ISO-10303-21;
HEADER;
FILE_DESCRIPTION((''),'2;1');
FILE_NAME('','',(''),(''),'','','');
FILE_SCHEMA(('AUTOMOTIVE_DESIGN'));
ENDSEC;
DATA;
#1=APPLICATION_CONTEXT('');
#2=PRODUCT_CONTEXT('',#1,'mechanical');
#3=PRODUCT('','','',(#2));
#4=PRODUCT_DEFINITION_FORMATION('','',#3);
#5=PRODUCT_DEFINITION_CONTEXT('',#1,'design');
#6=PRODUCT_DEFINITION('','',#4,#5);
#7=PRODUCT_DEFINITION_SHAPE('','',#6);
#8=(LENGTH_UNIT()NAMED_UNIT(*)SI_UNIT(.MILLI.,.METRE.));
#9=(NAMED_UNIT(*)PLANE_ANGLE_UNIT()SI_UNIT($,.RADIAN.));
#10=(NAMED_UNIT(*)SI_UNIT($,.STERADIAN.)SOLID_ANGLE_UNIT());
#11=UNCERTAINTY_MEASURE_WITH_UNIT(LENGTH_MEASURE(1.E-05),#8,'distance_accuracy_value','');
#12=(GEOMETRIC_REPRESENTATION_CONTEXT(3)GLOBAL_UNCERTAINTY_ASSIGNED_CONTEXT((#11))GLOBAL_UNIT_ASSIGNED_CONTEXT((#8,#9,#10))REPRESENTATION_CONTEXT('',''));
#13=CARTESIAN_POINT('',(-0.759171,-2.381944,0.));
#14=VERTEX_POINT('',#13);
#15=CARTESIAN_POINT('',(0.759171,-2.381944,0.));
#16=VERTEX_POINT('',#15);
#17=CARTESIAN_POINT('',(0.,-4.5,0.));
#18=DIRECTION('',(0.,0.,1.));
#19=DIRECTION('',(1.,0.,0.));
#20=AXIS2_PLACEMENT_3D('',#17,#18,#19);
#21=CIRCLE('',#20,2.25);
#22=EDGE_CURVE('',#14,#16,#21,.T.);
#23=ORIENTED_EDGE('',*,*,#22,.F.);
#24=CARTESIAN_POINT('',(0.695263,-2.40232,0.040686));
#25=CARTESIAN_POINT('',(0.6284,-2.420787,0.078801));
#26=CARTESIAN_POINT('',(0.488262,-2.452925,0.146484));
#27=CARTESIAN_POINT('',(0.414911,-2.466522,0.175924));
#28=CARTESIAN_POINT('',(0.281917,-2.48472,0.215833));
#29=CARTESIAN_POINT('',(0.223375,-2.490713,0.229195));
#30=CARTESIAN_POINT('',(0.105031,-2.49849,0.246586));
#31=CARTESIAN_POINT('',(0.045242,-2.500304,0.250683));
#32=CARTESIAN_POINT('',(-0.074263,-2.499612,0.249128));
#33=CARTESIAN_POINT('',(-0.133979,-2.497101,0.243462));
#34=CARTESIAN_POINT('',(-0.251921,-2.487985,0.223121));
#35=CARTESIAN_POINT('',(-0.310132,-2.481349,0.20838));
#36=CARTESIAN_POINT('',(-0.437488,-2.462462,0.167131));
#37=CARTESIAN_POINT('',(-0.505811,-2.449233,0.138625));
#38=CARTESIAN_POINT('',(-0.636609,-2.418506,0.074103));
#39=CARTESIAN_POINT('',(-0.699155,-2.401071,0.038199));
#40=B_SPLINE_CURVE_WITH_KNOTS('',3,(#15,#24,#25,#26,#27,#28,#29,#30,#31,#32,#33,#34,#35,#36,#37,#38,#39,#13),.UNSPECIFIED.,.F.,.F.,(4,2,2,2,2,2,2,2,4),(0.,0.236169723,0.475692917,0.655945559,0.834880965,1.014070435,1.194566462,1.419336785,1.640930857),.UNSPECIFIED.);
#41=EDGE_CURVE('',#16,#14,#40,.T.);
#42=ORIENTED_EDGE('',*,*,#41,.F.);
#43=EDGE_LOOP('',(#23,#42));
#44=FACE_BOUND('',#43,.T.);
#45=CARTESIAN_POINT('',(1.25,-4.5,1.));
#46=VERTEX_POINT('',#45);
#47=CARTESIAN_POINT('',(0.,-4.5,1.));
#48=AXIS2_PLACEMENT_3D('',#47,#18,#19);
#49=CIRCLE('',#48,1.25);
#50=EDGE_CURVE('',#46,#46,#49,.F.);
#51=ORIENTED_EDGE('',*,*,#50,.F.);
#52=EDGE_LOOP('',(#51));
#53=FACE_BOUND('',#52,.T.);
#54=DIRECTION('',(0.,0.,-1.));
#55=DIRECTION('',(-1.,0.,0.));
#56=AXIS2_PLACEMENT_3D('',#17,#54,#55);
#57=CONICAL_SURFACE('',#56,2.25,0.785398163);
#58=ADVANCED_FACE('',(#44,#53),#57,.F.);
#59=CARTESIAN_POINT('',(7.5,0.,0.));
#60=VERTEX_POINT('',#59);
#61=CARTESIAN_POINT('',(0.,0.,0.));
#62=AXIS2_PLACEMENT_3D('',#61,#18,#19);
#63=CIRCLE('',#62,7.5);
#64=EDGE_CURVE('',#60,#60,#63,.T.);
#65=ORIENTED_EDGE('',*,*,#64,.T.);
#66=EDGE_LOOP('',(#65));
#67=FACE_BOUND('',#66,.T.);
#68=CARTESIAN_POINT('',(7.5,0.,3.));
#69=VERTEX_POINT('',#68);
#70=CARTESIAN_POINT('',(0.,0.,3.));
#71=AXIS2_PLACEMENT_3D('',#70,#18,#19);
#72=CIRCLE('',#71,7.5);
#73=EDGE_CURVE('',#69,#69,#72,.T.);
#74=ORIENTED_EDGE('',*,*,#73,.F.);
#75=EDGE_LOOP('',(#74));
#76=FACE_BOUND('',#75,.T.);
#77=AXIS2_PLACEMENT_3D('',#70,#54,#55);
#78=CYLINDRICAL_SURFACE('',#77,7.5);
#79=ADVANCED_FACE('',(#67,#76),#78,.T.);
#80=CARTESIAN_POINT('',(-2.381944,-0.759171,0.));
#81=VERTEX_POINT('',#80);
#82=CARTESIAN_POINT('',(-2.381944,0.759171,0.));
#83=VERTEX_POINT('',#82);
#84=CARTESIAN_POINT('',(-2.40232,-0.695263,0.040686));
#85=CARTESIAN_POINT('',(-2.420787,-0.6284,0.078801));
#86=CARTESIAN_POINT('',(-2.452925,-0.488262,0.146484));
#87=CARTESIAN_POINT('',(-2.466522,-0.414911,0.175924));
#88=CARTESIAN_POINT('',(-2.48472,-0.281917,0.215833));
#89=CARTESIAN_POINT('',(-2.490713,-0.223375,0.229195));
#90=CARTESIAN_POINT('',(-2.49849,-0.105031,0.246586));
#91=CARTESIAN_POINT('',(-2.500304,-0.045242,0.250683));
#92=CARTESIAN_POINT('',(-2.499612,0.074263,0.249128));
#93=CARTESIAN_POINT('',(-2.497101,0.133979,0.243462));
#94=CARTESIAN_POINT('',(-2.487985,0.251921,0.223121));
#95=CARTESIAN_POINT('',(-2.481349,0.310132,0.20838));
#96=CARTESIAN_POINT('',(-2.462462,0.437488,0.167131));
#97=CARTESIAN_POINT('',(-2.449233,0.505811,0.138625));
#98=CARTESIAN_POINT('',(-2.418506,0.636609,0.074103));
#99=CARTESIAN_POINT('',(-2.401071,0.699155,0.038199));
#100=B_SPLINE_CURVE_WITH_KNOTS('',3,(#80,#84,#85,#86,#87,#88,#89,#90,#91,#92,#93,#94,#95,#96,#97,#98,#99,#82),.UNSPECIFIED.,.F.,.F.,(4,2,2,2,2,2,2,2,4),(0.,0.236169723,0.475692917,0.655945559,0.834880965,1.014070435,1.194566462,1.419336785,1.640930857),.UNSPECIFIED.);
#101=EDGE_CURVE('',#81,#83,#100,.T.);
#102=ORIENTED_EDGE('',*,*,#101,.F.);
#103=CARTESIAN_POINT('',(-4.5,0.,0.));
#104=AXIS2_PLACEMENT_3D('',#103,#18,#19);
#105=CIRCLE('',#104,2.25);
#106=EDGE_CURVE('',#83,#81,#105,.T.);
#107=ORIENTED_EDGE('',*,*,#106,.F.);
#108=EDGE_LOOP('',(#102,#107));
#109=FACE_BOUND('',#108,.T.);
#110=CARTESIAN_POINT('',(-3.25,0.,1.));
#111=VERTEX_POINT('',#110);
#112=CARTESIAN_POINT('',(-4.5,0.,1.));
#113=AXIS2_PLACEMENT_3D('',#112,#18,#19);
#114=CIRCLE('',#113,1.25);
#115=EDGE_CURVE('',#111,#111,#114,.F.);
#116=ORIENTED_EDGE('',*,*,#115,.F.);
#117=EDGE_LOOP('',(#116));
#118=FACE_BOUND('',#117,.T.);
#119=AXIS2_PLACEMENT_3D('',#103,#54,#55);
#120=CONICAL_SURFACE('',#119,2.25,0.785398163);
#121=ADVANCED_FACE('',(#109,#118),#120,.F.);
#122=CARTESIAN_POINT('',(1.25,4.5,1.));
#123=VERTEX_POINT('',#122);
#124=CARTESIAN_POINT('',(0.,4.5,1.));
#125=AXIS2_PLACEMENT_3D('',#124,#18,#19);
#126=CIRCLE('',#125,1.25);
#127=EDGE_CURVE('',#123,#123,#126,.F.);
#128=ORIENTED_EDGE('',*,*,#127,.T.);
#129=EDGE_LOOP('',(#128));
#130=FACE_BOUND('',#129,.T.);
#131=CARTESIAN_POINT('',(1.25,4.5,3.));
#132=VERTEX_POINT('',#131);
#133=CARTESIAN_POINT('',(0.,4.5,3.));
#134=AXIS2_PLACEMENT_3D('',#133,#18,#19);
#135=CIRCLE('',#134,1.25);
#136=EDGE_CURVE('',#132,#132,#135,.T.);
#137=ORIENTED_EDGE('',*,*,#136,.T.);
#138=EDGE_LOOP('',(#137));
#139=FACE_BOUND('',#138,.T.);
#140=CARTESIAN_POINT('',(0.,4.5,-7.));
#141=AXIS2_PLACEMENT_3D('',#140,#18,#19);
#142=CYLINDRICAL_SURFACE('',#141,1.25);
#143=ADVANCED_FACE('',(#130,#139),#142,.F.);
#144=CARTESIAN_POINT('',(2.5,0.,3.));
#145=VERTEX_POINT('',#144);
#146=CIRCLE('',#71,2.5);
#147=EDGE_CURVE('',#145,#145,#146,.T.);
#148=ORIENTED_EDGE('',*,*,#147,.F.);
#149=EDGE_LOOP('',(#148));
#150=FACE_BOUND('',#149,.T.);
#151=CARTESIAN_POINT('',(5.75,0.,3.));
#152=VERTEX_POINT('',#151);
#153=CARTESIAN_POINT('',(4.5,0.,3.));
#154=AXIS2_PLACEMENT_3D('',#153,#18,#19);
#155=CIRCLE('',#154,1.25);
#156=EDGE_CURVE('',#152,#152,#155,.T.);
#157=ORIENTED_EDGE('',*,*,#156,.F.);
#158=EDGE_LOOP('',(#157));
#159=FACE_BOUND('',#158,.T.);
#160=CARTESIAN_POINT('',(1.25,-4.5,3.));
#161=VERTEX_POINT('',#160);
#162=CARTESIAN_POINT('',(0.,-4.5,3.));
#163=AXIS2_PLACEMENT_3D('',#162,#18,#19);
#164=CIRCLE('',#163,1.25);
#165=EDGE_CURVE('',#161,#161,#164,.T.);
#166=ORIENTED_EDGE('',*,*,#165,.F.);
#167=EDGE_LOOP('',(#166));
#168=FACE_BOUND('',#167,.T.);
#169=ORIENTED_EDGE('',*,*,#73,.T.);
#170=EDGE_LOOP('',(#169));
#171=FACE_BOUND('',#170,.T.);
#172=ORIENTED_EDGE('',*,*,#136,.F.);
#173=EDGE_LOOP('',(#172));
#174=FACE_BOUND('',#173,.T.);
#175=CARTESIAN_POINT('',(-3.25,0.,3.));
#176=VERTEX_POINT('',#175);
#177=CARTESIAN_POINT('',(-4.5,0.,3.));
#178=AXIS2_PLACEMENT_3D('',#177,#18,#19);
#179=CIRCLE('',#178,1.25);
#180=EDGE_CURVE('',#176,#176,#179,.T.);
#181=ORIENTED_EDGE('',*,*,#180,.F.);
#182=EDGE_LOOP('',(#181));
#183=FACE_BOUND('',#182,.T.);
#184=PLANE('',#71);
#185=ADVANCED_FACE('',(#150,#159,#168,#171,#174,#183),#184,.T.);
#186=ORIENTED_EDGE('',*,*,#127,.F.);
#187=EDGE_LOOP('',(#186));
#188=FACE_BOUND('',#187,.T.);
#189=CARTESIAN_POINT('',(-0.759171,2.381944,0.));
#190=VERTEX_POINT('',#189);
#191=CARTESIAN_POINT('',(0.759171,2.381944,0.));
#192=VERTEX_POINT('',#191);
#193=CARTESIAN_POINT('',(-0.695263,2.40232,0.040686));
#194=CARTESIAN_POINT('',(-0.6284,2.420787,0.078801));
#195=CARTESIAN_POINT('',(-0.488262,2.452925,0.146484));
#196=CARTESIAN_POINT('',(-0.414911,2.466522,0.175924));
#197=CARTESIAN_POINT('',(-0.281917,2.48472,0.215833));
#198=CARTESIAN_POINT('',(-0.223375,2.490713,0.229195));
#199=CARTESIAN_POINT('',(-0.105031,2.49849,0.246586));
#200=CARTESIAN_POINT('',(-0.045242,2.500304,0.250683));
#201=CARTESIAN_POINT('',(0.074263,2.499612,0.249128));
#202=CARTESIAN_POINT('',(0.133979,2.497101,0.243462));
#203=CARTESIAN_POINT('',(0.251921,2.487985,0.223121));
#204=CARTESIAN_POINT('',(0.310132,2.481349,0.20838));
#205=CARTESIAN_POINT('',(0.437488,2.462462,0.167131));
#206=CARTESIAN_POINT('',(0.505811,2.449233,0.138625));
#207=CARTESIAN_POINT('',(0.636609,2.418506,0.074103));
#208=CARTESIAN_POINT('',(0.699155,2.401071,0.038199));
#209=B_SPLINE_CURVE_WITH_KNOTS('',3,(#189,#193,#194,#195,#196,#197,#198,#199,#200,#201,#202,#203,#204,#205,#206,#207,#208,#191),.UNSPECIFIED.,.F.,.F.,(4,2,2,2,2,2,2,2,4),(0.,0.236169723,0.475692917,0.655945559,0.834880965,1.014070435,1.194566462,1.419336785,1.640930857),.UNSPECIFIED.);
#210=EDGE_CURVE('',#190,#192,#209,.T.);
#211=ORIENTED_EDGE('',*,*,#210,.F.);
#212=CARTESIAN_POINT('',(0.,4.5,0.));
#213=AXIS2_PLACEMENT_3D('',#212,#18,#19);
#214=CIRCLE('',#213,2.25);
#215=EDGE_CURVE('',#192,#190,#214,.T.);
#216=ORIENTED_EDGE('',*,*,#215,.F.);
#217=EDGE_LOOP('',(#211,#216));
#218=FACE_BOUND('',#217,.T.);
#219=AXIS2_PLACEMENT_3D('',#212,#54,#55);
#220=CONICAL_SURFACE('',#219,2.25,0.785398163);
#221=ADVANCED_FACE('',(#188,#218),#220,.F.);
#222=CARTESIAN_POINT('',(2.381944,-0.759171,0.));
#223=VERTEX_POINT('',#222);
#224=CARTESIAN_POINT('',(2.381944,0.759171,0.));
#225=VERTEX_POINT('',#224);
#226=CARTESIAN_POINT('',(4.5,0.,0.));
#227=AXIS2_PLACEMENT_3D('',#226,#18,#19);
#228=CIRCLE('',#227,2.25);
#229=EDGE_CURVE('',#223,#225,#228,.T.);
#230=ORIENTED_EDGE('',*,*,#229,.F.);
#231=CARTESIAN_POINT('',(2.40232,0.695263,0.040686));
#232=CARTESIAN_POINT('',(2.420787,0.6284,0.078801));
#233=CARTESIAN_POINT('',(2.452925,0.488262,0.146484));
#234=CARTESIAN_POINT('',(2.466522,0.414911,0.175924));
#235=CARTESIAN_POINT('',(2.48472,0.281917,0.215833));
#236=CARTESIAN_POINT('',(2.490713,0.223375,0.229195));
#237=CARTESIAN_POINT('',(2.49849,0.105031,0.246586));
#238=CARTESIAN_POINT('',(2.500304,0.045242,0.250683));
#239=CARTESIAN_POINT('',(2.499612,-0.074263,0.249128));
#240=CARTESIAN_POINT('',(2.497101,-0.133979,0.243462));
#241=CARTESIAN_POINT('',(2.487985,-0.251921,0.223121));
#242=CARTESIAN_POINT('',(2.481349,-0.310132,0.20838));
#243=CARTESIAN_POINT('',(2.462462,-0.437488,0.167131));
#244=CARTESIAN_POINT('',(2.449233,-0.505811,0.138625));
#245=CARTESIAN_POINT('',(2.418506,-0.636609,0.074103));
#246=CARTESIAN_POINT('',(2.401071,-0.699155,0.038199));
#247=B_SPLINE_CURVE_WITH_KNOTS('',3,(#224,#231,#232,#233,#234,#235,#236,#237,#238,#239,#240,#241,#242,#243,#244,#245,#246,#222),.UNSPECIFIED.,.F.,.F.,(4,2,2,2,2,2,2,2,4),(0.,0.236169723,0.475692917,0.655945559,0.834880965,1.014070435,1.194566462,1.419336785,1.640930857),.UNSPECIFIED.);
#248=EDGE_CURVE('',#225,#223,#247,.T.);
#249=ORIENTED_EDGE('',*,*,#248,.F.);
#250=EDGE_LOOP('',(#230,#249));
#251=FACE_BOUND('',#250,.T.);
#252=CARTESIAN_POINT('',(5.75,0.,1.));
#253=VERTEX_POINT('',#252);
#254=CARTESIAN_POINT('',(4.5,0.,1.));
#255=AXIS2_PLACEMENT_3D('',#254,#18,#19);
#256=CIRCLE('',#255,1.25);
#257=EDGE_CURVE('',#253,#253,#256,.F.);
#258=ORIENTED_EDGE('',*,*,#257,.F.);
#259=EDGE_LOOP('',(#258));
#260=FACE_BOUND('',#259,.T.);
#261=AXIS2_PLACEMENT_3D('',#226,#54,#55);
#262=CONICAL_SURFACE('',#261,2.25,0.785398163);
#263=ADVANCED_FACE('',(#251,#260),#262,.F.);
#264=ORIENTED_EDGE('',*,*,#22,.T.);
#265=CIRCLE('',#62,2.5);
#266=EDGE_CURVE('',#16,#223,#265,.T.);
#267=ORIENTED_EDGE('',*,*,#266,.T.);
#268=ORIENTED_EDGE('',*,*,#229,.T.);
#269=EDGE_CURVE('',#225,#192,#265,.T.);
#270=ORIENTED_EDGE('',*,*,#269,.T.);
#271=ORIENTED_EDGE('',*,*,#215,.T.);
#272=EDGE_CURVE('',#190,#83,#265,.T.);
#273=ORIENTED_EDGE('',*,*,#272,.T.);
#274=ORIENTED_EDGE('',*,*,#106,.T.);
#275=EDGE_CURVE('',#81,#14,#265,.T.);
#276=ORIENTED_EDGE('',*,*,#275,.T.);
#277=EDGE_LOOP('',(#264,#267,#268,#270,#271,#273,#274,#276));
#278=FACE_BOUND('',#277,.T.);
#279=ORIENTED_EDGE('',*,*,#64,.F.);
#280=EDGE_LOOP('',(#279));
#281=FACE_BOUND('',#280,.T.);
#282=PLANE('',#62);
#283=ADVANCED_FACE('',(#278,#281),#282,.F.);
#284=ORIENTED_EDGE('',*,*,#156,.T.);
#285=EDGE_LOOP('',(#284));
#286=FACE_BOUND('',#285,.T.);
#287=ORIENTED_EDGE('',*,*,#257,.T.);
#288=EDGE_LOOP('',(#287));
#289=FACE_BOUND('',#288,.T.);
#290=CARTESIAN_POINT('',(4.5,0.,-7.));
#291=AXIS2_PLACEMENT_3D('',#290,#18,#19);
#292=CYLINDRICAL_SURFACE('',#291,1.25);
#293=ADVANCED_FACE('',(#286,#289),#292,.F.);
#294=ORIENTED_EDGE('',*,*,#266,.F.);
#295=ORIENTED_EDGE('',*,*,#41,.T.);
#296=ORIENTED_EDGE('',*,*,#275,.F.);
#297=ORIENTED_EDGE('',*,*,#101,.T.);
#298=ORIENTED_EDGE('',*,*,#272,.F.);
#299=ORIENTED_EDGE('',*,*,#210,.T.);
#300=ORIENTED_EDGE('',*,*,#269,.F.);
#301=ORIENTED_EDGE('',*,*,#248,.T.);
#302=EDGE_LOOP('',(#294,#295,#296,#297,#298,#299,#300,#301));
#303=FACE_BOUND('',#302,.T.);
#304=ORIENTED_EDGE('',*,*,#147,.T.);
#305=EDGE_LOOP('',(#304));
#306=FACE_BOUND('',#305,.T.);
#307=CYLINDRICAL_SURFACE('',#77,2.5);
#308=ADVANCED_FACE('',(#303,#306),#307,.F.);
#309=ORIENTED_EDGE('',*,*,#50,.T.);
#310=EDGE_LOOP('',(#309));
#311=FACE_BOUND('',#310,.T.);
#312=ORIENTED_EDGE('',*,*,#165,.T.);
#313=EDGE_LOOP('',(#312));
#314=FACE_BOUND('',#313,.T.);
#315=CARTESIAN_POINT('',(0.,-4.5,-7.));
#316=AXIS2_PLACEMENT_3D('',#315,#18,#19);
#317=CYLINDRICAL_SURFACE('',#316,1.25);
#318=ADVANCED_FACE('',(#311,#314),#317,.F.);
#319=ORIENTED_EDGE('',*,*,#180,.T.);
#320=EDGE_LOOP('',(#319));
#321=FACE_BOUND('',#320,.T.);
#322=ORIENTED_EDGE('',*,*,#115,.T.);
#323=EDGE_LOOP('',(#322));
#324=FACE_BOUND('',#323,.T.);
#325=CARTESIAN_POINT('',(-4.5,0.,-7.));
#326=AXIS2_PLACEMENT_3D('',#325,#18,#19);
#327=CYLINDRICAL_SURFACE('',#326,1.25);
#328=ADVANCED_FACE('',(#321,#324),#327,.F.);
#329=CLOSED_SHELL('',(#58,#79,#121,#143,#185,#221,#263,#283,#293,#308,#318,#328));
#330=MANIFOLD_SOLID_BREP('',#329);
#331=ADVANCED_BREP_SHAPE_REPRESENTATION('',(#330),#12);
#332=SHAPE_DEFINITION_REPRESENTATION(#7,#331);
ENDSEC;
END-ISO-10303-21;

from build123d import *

# Parameters (mm, degrees)
SKETCH_1_R          = 7.5
SKETCH_1_R_2        = 2.5
EXTRUDE_1_DEPTH     = 3
SKETCH_2_R          = 1.25
CUT_EXTRUDE_1_DEPTH = 10
CHAMFER_1_SIZE      = 1


with BuildPart() as part:
    # 草图1 → 凸台-拉伸1 (new body)
    with BuildSketch(Plane.XY):
        Circle(SKETCH_1_R)
        Circle(SKETCH_1_R_2, mode=Mode.SUBTRACT)
    extrude(amount=EXTRUDE_1_DEPTH)

    # 草图2 → 切除-拉伸1 (cut)
    with BuildSketch(Plane.XY.offset(3)):
        with Locations((0, 4.5)):
            Circle(SKETCH_2_R)
        with Locations((4.5, 0)):
            Circle(SKETCH_2_R)
        with Locations((0, -4.5)):
            Circle(SKETCH_2_R)
        with Locations((-4.5, 0)):
            Circle(SKETCH_2_R)
    extrude(amount=-CUT_EXTRUDE_1_DEPTH, mode=Mode.SUBTRACT)

    # 倒角1
    # the kernel refuses this chamfer: 1 mm, written as the material it takes off along each edge
    with BuildSketch(Plane(origin=(0, 4.5, 0), x_dir=(1, 0, 0), z_dir=(0, -1, 0))) as chamfer_1_piece_1:
        Polygon((1.25 + CHAMFER_1_SIZE, 0), (1.25, CHAMFER_1_SIZE), (1.25, 0), align=None)
    revolve(axis=Axis((0, 4.5, 0), (0, 0, 1)), mode=Mode.SUBTRACT)
    with BuildSketch(Plane(origin=(4.5, 0, 0), x_dir=(1, 0, 0), z_dir=(0, -1, 0))) as chamfer_1_piece_2:
        Polygon((1.25 + CHAMFER_1_SIZE, 0), (1.25, CHAMFER_1_SIZE), (1.25, 0), align=None)
    revolve(axis=Axis((4.5, 0, 0), (0, 0, 1)), mode=Mode.SUBTRACT)
    with BuildSketch(Plane(origin=(0, -4.5, 0), x_dir=(1, 0, 0), z_dir=(0, -1, 0))) as chamfer_1_piece_3:
        Polygon((1.25 + CHAMFER_1_SIZE, 0), (1.25, CHAMFER_1_SIZE), (1.25, 0), align=None)
    revolve(axis=Axis((0, -4.5, 0), (0, 0, 1)), mode=Mode.SUBTRACT)
    with BuildSketch(Plane(origin=(-4.5, 0, 0), x_dir=(1, 0, 0), z_dir=(0, -1, 0))) as chamfer_1_piece_4:
        Polygon((1.25 + CHAMFER_1_SIZE, 0), (1.25, CHAMFER_1_SIZE), (1.25, 0), align=None)
    revolve(axis=Axis((-4.5, 0, 0), (0, 0, 1)), mode=Mode.SUBTRACT)


solid = part.part
